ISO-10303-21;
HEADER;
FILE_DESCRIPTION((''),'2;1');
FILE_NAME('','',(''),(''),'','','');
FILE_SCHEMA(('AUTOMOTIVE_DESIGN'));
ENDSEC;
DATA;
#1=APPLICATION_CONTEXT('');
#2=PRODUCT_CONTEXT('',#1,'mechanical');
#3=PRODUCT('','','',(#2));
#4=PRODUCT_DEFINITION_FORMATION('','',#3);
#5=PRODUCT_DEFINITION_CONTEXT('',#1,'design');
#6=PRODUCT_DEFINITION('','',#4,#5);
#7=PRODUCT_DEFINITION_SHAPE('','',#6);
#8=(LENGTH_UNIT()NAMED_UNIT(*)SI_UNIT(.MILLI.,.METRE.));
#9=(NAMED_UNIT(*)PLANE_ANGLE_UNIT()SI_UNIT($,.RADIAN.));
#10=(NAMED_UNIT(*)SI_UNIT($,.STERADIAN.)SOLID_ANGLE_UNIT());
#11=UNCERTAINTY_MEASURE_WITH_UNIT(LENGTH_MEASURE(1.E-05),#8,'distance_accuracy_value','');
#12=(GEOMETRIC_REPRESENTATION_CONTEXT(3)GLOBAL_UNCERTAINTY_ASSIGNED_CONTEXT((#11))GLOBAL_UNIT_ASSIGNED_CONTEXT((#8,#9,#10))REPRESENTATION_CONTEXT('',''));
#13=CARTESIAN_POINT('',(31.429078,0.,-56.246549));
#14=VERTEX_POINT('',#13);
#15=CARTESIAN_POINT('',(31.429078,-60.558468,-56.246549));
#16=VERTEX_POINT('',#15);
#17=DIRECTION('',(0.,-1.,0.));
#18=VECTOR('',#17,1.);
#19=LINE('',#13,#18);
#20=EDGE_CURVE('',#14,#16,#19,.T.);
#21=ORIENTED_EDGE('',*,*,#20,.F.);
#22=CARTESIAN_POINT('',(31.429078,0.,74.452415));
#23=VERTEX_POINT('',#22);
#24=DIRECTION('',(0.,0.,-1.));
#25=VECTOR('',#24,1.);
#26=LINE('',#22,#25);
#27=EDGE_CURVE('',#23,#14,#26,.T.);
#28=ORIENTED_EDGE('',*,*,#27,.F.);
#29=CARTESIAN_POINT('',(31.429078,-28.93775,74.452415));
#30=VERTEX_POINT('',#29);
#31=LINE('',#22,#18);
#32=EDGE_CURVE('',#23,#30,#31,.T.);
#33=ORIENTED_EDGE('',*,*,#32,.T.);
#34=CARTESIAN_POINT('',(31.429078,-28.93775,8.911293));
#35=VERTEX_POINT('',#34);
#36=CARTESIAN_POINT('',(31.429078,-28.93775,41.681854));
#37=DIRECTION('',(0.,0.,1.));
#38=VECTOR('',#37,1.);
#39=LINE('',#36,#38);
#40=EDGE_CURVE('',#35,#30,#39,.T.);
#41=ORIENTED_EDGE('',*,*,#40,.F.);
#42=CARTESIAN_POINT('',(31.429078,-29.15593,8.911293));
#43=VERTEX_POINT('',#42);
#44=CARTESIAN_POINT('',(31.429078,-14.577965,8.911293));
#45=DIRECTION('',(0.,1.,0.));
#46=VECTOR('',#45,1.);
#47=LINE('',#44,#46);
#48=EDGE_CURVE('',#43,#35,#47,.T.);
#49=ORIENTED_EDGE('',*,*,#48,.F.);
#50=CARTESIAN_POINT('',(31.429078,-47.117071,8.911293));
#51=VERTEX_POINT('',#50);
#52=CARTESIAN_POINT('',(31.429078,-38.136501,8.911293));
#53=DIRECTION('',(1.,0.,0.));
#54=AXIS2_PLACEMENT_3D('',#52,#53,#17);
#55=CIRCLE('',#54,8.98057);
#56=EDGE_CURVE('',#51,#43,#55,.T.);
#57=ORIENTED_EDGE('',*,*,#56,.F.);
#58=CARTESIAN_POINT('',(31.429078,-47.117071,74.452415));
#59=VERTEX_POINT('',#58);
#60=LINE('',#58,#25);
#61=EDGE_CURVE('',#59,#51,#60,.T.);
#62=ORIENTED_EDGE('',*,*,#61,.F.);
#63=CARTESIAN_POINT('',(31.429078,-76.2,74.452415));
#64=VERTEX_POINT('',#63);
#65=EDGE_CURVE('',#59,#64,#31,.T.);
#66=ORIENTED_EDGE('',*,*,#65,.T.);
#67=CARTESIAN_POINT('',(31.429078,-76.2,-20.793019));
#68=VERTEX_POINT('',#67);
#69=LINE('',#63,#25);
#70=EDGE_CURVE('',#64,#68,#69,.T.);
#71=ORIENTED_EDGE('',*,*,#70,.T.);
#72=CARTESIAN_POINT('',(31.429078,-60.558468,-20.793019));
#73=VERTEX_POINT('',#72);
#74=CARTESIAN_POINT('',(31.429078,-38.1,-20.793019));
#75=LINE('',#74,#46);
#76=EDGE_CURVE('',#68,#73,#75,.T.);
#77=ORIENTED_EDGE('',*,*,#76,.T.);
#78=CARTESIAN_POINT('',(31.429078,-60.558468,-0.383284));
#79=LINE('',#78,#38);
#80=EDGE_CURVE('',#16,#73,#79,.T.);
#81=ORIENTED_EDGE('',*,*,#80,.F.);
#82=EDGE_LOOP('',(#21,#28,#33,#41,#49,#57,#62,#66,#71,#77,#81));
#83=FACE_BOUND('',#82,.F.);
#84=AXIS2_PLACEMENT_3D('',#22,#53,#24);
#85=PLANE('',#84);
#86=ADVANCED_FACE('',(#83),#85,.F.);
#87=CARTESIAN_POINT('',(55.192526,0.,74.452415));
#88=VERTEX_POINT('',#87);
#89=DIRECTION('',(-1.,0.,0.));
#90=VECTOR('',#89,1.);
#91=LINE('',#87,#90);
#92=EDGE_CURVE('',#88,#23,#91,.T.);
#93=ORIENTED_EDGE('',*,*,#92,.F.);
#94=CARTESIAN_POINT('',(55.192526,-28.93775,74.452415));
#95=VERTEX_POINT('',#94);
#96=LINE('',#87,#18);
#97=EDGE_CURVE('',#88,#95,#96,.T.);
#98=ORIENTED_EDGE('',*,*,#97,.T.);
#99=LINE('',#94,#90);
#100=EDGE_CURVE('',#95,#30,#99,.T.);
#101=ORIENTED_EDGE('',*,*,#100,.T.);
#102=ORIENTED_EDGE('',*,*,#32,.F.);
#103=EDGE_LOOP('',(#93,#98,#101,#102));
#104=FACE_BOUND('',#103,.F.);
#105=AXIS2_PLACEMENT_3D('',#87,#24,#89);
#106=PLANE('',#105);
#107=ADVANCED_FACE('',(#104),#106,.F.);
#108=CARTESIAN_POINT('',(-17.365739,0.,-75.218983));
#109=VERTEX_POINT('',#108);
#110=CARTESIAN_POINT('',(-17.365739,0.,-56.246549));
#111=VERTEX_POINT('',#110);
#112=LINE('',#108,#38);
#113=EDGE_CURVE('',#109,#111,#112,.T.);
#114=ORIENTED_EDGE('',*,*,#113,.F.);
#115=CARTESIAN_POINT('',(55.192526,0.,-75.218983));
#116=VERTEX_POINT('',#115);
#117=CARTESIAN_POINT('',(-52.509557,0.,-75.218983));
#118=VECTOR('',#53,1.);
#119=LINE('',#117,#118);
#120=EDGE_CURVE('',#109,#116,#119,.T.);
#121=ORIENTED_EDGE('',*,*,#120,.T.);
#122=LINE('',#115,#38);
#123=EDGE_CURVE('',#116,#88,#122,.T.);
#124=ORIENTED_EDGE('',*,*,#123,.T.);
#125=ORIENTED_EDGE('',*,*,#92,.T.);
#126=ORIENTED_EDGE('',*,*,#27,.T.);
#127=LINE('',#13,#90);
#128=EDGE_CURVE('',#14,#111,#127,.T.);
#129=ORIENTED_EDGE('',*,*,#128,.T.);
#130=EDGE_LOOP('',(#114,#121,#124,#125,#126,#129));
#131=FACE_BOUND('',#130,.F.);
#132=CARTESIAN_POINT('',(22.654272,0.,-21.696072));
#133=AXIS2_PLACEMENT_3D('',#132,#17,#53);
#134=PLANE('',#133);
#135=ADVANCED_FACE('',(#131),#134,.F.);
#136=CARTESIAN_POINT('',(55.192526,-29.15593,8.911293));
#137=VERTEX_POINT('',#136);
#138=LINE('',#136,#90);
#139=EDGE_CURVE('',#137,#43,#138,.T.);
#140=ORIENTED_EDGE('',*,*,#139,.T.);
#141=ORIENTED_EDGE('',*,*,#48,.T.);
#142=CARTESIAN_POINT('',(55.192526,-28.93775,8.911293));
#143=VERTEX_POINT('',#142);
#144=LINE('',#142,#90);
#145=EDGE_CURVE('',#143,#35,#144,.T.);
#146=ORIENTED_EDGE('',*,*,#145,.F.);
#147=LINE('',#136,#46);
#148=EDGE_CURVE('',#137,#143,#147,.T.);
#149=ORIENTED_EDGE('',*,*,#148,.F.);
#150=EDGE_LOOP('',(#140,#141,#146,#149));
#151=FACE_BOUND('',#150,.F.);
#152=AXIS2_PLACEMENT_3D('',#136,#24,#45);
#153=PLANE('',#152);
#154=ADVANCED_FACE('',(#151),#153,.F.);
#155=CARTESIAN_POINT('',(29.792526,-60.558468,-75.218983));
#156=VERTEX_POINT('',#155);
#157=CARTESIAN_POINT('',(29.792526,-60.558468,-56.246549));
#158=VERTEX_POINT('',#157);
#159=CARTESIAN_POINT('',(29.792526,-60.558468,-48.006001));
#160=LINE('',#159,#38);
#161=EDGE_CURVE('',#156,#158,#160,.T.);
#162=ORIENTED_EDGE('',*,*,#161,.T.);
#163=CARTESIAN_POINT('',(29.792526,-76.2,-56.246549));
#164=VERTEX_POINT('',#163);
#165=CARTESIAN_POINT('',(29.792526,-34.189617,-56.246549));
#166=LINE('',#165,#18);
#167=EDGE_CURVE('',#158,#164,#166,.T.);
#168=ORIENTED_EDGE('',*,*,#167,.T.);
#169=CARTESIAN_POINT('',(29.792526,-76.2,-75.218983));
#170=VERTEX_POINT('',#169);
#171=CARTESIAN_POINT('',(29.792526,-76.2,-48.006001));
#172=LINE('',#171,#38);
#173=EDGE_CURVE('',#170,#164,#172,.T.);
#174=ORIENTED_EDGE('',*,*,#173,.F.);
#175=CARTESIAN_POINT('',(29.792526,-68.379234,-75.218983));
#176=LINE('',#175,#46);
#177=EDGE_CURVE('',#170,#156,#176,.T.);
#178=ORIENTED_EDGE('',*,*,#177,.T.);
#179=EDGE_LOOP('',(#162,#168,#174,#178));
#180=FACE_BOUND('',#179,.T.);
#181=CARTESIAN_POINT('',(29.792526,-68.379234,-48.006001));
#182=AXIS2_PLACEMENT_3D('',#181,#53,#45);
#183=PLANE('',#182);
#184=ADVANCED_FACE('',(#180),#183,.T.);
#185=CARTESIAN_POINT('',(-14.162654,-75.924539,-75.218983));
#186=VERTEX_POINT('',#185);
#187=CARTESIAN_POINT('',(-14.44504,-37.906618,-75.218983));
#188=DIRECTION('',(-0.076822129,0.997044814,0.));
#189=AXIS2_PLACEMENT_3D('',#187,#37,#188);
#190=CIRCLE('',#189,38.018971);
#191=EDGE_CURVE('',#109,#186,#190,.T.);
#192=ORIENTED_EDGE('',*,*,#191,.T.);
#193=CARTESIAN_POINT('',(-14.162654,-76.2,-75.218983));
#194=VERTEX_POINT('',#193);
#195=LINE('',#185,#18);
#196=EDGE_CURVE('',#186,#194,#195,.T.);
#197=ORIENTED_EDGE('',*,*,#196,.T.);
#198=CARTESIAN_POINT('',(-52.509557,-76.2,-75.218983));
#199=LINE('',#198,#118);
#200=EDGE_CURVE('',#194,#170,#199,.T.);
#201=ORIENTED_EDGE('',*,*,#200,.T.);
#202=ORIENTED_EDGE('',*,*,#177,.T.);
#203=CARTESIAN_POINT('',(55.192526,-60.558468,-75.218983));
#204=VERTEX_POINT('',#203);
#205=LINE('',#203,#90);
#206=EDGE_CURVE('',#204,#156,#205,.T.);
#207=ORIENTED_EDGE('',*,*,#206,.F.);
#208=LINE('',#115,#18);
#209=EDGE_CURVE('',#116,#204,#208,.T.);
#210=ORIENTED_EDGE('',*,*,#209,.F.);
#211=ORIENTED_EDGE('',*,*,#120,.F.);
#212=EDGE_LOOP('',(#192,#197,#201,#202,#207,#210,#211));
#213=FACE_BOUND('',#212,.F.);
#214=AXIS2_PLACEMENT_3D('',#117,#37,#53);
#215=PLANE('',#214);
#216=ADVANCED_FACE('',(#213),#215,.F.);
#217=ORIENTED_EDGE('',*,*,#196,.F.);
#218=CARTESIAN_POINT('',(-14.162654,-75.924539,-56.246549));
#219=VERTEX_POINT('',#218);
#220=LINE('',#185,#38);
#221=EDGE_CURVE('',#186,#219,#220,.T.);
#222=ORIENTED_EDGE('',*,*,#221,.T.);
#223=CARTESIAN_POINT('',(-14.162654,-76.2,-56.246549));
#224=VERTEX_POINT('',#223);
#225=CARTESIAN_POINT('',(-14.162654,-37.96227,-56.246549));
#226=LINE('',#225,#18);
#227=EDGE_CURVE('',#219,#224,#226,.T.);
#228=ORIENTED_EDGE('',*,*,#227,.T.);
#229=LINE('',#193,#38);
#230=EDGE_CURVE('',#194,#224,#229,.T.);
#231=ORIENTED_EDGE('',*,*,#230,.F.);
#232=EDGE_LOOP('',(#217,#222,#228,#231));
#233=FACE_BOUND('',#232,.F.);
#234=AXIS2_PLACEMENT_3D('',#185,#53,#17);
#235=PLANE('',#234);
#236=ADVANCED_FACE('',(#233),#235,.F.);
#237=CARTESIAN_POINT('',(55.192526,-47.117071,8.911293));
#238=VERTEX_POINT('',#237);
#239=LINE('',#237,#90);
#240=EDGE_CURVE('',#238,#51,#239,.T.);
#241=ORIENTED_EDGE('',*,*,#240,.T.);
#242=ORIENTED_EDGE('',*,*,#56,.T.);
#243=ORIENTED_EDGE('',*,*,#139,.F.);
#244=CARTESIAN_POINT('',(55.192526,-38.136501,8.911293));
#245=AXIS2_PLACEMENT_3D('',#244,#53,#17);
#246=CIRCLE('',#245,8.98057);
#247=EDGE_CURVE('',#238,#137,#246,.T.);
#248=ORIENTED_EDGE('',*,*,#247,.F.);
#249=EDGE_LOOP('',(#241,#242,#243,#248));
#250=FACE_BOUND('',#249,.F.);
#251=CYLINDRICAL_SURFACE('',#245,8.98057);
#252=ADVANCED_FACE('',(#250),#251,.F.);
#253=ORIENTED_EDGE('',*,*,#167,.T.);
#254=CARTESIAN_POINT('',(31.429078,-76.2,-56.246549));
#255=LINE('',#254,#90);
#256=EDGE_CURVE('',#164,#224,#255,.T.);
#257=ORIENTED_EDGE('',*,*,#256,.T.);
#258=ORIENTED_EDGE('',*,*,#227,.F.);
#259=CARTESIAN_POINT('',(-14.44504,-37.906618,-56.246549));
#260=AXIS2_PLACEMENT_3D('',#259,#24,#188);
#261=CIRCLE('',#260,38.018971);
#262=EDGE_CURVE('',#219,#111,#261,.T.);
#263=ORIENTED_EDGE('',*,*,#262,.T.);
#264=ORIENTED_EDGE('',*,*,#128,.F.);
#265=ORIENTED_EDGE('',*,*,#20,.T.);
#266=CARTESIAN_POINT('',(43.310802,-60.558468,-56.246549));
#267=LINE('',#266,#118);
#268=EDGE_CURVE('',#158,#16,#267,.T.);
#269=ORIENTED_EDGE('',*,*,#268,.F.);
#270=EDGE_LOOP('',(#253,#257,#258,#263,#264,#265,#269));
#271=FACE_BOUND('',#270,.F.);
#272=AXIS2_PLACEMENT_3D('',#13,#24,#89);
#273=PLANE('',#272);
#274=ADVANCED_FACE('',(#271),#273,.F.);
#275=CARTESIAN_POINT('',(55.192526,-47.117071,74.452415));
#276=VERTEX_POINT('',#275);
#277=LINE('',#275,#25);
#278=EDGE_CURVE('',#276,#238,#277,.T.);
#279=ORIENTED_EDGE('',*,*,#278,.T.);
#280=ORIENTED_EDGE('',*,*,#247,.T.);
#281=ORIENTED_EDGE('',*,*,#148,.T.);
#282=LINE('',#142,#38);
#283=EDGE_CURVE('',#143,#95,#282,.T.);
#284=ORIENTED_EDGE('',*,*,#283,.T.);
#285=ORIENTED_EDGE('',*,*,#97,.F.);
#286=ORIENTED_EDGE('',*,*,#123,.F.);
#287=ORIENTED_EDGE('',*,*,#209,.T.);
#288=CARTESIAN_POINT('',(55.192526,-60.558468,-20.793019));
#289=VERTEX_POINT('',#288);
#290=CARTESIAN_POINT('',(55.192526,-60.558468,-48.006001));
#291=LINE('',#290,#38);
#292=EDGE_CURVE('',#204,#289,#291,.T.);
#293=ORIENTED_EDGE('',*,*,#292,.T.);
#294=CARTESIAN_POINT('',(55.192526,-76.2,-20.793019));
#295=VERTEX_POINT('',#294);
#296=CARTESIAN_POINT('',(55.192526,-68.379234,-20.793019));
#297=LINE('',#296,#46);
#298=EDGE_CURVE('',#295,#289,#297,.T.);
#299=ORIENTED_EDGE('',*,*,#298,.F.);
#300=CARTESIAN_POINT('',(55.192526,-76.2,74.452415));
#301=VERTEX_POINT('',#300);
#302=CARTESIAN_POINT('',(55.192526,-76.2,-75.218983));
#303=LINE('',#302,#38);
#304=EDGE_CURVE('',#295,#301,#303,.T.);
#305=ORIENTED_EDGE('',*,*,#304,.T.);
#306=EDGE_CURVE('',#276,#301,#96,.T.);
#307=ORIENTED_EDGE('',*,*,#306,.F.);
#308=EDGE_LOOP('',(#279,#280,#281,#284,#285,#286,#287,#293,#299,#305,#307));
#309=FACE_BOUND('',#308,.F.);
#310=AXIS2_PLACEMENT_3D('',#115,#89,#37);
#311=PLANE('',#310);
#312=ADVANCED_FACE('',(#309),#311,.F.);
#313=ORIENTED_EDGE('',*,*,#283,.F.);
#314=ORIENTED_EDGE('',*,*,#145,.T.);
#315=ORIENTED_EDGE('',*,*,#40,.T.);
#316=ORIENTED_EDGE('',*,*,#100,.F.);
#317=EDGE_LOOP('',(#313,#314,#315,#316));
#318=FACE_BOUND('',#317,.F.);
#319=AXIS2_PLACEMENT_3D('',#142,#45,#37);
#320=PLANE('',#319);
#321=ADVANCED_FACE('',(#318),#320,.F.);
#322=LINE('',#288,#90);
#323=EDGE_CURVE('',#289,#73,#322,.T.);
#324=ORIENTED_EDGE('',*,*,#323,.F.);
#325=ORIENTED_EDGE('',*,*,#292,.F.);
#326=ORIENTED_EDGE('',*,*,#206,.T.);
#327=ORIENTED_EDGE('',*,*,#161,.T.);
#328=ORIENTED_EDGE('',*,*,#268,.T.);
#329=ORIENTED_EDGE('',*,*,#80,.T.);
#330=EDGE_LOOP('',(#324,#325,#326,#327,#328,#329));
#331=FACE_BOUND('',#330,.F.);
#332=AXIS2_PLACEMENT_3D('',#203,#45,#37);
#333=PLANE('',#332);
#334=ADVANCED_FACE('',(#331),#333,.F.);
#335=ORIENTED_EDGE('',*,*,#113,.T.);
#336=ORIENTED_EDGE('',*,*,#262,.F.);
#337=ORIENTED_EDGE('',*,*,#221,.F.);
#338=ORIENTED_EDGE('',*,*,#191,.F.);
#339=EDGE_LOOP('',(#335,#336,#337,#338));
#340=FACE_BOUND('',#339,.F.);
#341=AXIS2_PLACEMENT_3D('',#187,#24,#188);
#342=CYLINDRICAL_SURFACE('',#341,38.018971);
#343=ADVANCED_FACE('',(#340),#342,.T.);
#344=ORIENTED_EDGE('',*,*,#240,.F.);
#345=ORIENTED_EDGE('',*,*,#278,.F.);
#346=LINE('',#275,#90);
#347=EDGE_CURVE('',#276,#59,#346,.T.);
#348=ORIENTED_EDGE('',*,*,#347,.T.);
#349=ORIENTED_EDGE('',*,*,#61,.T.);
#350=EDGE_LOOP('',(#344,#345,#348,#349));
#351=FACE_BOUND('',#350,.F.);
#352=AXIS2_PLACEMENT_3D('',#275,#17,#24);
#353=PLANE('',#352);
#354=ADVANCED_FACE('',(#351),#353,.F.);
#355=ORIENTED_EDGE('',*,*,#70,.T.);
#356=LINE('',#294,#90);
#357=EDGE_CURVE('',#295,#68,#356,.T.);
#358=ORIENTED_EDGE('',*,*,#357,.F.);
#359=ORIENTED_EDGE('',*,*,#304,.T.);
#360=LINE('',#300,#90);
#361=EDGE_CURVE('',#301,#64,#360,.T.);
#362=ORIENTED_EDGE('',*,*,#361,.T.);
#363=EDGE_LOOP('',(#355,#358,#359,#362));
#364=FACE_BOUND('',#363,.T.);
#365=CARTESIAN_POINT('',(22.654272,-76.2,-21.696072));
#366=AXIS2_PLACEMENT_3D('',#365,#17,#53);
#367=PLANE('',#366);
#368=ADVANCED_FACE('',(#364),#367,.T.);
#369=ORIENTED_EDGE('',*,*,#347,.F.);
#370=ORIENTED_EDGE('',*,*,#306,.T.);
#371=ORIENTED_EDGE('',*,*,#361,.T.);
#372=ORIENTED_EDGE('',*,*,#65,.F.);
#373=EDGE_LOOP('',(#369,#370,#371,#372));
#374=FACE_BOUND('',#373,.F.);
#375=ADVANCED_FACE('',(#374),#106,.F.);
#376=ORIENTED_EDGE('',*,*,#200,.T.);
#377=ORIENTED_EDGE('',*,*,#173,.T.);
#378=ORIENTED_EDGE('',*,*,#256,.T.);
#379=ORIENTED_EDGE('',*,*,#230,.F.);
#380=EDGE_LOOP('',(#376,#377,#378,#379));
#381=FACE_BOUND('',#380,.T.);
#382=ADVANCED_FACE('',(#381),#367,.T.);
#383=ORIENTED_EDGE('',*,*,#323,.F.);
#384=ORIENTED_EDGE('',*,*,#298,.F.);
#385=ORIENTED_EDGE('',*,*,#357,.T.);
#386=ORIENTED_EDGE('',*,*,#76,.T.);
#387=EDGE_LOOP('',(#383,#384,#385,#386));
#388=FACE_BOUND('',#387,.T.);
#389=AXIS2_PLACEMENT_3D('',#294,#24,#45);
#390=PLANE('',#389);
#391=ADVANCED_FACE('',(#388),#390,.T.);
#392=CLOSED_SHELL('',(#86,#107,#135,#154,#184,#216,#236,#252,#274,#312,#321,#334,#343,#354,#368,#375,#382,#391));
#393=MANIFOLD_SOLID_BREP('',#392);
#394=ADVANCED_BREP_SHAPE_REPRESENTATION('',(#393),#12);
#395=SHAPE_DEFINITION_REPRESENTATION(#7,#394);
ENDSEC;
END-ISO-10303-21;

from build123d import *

# Parameters (mm, degrees)
F1_DEPTH = 76.2
F3_DEPTH = 107.7030838857
F5_W     = 15.6415318966
F5_H     = 54.425964132
F6_DEPTH = 25.4
F8_DEPTH = 149.6723981032


# Not quite as in the source:
# - a feature of the source that left no trace in its solid (it failed there, or was rolled back) is left out


with BuildPart() as f1:
    # F0 (on Front) → F1 (new body)
    with BuildSketch(Plane.XZ):
        Polygon((55.1925264299, 74.4524151087), (31.4290784299, 74.4524151087), (31.4290784299, -56.2465488911), (-52.5095574558, -56.2465488911), (-52.5095574558, -75.2189829946), (55.1925264299, -75.2189829946), align=None)
    extrude(amount=F1_DEPTH)

    # F2 (on face) → F3 (cut, through all)
    with BuildSketch(Plane.YZ.offset(55.1925264299)):
        with BuildLine():
            Line((-47.1170713552, 8.9112932328), (-29.1559303752, 8.9112932328))
            ThreePointArc((-29.1559303752, 8.9112932328), (-38.1365008652, 17.8918637228), (-47.1170713552, 8.9112932328))
        make_face()
        with BuildLine():
            ThreePointArc((-47.1170713552, 8.9112932328), (-38.1365008652, -0.0692772572), (-29.1559303752, 8.9112932328))
            Line((-29.1559303752, 8.9112932328), (-47.1170713552, 8.9112932328))
        make_face()
        with BuildLine():
            ThreePointArc((-47.1170713552, 8.9112932328), (-38.1365008652, 17.8918637228), (-29.1559303752, 8.9112932328))
            Line((-29.1559303752, 8.9112932328), (-28.9377495646, 8.9112932328))
            Line((-28.9377495646, 8.9112932328), (-28.9377495646, 74.4524151087))
            Line((-28.9377495646, 74.4524151087), (-47.1170713552, 74.4524151087))
            Line((-47.1170713552, 74.4524151087), (-47.1170713552, 8.9112932328))
        make_face()
    extrude(amount=-F3_DEPTH, mode=Mode.SUBTRACT)

    # F5 (on face) → F6 (cut)
    with BuildSketch(Plane.YZ.offset(55.1925264299)):
        with Locations((-68.3792340517, -48.0060009286)):
            Rectangle(F5_W, F5_H)
    extrude(amount=-F6_DEPTH, mode=Mode.SUBTRACT)

    # F7 (on face) → F8 (cut, through all)
    with BuildSketch(Plane(origin=(0, 0, -75.2189829946), x_dir=(1, 0, 0), z_dir=(0, 0, -1))):
        with BuildLine():
            ThreePointArc((-17.3657385867, 0), (-52.4302228968, 39.5091264656), (-14.1626540173, 75.9245394945))
            Line((-14.1626540173, 75.9245394945), (-14.1626540173, 76.2))
            Line((-14.1626540173, 76.2), (-52.5095574558, 76.2))
            Line((-52.5095574558, 76.2), (-52.5095574558, 0))
            Line((-52.5095574558, 0), (-17.3657385867, 0))
        make_face()
    extrude(amount=-F8_DEPTH, mode=Mode.SUBTRACT)


solid = f1.part
